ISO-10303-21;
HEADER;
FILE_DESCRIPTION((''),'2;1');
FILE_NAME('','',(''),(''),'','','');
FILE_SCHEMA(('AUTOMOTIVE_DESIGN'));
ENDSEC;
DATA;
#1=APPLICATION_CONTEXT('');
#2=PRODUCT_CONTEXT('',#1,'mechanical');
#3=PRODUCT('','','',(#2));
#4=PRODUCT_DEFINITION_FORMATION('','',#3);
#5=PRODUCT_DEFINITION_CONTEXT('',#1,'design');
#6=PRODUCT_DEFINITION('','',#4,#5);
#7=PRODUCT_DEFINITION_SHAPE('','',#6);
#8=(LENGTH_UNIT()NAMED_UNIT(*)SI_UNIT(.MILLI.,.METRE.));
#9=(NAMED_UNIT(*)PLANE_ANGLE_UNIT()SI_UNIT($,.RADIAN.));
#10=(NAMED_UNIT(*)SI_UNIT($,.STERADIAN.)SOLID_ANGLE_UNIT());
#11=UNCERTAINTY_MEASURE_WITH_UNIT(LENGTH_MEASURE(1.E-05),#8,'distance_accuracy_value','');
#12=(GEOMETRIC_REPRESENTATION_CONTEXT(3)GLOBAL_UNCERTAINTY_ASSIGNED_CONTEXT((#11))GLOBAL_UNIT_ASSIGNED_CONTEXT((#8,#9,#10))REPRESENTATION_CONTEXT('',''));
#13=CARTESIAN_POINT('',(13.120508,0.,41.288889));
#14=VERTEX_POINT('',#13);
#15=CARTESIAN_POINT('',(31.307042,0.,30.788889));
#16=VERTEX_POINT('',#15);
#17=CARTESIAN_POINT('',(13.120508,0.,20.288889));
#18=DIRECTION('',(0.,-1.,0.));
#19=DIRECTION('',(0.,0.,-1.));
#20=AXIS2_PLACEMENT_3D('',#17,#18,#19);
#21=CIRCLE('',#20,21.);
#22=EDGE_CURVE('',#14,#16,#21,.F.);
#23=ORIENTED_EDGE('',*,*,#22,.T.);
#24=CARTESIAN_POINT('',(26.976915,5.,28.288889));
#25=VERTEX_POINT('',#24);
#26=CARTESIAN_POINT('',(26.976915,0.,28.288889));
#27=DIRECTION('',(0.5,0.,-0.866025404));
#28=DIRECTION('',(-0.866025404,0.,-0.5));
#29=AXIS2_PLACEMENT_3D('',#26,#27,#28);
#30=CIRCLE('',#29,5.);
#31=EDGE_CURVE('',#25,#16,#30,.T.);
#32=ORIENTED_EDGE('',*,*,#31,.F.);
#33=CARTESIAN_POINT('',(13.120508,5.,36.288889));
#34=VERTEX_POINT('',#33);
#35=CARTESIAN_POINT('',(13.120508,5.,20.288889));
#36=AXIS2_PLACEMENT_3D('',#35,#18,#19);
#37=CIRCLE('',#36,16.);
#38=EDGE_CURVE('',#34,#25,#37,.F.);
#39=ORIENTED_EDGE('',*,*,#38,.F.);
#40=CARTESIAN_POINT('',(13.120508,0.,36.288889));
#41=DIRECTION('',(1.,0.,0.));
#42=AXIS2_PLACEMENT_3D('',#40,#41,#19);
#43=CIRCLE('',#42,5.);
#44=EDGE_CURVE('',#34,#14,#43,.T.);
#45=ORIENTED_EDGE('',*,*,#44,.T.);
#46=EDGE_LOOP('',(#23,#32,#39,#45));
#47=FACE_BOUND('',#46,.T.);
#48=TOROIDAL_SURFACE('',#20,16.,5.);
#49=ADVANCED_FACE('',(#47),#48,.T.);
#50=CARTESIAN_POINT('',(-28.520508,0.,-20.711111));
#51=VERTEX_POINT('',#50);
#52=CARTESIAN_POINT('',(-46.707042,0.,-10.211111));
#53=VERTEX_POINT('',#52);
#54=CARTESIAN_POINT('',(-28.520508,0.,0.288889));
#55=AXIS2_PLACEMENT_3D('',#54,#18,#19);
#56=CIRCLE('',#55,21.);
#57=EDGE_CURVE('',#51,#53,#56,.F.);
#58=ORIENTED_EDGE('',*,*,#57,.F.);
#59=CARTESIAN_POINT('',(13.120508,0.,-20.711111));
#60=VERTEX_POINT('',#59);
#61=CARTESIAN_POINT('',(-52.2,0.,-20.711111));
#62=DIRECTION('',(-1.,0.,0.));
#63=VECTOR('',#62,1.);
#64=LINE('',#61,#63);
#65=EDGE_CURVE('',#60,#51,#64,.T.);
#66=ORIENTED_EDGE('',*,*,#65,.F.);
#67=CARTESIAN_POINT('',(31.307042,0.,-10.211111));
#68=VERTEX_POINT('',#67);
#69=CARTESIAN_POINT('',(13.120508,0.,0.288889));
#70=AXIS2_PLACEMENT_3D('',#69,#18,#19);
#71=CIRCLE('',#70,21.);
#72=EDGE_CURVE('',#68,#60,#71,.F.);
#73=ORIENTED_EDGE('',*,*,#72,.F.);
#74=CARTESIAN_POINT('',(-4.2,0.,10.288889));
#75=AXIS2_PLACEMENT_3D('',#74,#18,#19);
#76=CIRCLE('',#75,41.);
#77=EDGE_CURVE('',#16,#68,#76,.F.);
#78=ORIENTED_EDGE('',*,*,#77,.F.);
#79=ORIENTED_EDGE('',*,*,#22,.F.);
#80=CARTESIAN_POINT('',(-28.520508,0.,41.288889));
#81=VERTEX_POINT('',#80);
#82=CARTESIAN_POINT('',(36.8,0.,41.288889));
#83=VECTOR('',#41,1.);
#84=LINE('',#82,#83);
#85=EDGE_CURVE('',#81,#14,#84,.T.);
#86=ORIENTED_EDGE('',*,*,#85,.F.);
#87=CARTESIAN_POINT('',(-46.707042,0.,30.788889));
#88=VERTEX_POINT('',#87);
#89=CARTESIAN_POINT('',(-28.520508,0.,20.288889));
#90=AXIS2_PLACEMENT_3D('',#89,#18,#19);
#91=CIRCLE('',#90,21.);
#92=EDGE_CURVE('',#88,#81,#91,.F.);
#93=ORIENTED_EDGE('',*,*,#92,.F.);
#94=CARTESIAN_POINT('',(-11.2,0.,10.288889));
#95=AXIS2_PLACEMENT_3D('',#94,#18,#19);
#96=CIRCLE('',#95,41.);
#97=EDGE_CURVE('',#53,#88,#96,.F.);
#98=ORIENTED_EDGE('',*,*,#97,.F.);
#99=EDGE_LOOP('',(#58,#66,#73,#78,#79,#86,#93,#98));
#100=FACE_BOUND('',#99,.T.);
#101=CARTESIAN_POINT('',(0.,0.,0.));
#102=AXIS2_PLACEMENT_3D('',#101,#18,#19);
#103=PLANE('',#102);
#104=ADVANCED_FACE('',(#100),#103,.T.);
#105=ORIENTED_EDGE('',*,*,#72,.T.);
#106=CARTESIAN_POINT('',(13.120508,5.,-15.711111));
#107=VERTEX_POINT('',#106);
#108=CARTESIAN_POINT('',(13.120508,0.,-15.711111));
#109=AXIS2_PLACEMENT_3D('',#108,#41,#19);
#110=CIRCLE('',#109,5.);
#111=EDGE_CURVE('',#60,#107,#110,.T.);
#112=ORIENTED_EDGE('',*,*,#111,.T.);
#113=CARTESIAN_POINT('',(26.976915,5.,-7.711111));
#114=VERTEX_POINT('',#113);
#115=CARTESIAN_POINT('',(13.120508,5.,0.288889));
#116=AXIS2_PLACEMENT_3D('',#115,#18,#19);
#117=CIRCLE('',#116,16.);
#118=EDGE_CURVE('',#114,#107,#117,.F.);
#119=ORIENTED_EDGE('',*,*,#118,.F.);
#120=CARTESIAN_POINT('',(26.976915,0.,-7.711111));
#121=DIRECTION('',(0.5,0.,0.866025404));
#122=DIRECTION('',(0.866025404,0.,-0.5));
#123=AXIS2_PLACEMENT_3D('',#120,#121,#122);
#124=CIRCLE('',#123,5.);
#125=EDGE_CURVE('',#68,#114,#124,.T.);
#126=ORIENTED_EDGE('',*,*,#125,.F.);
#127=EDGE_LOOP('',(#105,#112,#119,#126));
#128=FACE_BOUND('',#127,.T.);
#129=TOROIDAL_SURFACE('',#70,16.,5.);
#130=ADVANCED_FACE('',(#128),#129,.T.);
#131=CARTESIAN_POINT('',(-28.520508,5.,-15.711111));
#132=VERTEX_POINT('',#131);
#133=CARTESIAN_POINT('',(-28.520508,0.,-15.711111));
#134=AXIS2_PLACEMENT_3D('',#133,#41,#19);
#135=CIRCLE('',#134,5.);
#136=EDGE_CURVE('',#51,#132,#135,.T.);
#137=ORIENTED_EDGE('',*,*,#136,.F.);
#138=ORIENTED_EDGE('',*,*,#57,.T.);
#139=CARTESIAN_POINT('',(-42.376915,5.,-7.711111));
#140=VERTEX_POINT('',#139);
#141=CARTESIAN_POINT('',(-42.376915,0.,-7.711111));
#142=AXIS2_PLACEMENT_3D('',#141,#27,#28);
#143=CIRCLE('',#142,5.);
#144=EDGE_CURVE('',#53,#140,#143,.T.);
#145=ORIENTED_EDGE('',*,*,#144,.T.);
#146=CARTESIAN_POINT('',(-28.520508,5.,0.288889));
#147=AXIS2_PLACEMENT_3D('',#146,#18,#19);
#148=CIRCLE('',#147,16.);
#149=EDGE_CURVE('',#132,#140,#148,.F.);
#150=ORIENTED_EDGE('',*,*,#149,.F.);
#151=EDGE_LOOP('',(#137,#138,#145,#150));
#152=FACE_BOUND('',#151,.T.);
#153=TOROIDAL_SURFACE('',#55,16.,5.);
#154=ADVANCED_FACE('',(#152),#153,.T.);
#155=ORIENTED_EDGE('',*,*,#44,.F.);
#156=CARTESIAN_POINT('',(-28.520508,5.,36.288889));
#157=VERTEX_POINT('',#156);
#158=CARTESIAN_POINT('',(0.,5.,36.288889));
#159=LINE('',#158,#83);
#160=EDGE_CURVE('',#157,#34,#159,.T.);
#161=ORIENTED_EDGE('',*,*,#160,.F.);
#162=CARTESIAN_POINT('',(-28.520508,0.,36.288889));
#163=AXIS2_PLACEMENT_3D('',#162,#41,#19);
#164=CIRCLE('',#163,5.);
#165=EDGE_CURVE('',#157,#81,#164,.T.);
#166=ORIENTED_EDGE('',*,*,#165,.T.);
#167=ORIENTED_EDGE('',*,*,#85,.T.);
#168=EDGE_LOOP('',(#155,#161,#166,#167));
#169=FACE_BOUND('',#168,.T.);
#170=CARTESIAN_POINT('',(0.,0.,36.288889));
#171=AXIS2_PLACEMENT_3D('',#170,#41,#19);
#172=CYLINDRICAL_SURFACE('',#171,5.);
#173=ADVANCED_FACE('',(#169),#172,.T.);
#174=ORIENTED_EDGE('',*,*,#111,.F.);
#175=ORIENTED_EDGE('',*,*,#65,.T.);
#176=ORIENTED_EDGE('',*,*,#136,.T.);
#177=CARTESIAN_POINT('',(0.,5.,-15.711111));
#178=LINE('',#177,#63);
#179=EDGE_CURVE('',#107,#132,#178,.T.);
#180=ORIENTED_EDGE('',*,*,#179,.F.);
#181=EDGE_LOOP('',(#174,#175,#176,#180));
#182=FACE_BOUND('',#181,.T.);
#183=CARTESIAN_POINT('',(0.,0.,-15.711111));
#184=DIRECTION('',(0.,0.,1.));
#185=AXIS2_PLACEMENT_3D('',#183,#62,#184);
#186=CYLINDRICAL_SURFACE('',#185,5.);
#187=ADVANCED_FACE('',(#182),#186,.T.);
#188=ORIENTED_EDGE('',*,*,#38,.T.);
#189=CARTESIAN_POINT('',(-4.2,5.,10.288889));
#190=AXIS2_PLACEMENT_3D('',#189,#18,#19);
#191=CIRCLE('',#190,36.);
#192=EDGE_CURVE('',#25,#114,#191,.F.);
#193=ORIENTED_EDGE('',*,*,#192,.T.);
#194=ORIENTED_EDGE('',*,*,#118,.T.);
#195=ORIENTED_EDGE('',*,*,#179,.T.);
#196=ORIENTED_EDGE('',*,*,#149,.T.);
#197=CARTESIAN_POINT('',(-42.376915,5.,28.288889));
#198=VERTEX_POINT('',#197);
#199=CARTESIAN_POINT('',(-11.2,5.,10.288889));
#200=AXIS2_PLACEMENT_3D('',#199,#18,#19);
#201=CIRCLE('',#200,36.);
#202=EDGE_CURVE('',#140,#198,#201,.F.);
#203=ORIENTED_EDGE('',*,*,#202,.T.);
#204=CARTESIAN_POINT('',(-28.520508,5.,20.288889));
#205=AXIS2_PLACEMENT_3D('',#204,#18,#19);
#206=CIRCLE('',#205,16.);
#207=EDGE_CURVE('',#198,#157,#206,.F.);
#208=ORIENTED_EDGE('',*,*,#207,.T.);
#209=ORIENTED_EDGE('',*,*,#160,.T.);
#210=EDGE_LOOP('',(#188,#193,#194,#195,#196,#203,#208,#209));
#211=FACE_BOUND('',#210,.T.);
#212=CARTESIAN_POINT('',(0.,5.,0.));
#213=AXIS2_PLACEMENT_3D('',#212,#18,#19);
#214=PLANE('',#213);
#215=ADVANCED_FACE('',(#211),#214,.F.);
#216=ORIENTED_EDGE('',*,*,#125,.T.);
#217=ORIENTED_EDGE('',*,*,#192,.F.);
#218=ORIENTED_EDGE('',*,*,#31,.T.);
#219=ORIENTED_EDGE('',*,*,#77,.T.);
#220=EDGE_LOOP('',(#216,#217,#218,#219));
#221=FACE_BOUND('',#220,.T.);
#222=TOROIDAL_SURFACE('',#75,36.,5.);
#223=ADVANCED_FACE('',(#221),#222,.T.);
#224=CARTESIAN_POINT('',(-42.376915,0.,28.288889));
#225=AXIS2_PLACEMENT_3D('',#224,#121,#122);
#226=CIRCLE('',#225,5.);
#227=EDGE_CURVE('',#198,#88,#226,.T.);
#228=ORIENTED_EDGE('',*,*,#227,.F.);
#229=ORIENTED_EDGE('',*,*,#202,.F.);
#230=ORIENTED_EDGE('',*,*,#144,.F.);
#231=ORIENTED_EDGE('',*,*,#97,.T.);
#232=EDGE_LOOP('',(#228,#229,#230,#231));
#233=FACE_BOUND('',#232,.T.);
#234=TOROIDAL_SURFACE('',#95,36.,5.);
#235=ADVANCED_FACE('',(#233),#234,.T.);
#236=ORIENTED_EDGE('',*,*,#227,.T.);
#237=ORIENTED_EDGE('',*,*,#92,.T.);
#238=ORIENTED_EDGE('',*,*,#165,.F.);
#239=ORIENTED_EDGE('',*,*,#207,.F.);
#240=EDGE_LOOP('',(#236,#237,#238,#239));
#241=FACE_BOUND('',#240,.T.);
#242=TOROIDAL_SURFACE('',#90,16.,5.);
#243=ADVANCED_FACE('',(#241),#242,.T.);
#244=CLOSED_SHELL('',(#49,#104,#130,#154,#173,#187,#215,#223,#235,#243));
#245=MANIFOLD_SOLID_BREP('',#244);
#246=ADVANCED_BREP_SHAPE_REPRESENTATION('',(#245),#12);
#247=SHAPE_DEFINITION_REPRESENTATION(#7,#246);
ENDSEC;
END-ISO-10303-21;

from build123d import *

# Parameters (mm, degrees)
SKETCH_1_W          = 89
SKETCH_1_H          = 62
EXTRUDE_1_DEPTH     = 5
CUT_EXTRUDE_START   = -5.000001
SKETCH_2_W          = 114.345269922
SKETCH_2_H          = 82.741202996
CUT_EXTRUDE_2_DEPTH = 5.000002
FILLET_1_R          = 5


with BuildPart() as part:
    # 草图1 → 凸台-拉伸1 (new body)
    with BuildSketch(Plane(origin=(0, 0, 0), x_dir=(1, 0, 0), z_dir=(0, 1, 0))):
        with Locations((-7.7, -10.288888889)):
            Rectangle(SKETCH_1_W, SKETCH_1_H)
    extrude(amount=EXTRUDE_1_DEPTH)

    # 草图2 → 切除-拉伸2 (cut)
    with BuildSketch(Plane(origin=(0, 5, 0), x_dir=(1, 0, 0), z_dir=(0, 1, 0)).offset(CUT_EXTRUDE_START)):
        with Locations((-11.341983823, -7.488413354)):
            Rectangle(SKETCH_2_W, SKETCH_2_H)
        with BuildLine():
            Line((-28.520508076, 20.711111111), (13.120508076, 20.711111111))
            ThreePointArc((13.120508076, 20.711111111), (23.620508076, 17.897644591), (31.307041555, 10.211111111))
            ThreePointArc((31.307041555, 10.211111111), (36.8, -10.288888889), (31.307041555, -30.788888889))
            ThreePointArc((31.307041555, -30.788888889), (23.620508076, -38.475422368), (13.120508076, -41.288888889))
            Line((13.120508076, -41.288888889), (-28.520508076, -41.288888889))
            ThreePointArc((-28.520508076, -41.288888889), (-39.020508076, -38.475422368), (-46.707041555, -30.788888889))
            ThreePointArc((-46.707041555, -30.788888889), (-52.2, -10.288888889), (-46.707041555, 10.211111111))
            ThreePointArc((-46.707041555, 10.211111111), (-39.020508076, 17.897644591), (-28.520508076, 20.711111111))
        make_face(mode=Mode.SUBTRACT)
    extrude(amount=CUT_EXTRUDE_2_DEPTH, mode=Mode.SUBTRACT)

    # 圆角1
    fillet_1_edges = [part.edges().sort_by_distance(p)[0] for p in [
        (36.8, 5, 10.288888889),
        (23.620508076, 5, 38.475422368),
        (-7.7, 5, 41.288888889),
        (-39.020508076, 5, 38.475422368),
        (-52.2, 5, 10.288888889),
        (-39.020508076, 5, -17.897644591),
        (-7.7, 5, -20.711111111),
        (23.620508076, 5, -17.897644591),
    ]]
    fillet(fillet_1_edges, radius=FILLET_1_R - 0.0001)  # a hair under: the kernel refuses the full size


solid = part.part
